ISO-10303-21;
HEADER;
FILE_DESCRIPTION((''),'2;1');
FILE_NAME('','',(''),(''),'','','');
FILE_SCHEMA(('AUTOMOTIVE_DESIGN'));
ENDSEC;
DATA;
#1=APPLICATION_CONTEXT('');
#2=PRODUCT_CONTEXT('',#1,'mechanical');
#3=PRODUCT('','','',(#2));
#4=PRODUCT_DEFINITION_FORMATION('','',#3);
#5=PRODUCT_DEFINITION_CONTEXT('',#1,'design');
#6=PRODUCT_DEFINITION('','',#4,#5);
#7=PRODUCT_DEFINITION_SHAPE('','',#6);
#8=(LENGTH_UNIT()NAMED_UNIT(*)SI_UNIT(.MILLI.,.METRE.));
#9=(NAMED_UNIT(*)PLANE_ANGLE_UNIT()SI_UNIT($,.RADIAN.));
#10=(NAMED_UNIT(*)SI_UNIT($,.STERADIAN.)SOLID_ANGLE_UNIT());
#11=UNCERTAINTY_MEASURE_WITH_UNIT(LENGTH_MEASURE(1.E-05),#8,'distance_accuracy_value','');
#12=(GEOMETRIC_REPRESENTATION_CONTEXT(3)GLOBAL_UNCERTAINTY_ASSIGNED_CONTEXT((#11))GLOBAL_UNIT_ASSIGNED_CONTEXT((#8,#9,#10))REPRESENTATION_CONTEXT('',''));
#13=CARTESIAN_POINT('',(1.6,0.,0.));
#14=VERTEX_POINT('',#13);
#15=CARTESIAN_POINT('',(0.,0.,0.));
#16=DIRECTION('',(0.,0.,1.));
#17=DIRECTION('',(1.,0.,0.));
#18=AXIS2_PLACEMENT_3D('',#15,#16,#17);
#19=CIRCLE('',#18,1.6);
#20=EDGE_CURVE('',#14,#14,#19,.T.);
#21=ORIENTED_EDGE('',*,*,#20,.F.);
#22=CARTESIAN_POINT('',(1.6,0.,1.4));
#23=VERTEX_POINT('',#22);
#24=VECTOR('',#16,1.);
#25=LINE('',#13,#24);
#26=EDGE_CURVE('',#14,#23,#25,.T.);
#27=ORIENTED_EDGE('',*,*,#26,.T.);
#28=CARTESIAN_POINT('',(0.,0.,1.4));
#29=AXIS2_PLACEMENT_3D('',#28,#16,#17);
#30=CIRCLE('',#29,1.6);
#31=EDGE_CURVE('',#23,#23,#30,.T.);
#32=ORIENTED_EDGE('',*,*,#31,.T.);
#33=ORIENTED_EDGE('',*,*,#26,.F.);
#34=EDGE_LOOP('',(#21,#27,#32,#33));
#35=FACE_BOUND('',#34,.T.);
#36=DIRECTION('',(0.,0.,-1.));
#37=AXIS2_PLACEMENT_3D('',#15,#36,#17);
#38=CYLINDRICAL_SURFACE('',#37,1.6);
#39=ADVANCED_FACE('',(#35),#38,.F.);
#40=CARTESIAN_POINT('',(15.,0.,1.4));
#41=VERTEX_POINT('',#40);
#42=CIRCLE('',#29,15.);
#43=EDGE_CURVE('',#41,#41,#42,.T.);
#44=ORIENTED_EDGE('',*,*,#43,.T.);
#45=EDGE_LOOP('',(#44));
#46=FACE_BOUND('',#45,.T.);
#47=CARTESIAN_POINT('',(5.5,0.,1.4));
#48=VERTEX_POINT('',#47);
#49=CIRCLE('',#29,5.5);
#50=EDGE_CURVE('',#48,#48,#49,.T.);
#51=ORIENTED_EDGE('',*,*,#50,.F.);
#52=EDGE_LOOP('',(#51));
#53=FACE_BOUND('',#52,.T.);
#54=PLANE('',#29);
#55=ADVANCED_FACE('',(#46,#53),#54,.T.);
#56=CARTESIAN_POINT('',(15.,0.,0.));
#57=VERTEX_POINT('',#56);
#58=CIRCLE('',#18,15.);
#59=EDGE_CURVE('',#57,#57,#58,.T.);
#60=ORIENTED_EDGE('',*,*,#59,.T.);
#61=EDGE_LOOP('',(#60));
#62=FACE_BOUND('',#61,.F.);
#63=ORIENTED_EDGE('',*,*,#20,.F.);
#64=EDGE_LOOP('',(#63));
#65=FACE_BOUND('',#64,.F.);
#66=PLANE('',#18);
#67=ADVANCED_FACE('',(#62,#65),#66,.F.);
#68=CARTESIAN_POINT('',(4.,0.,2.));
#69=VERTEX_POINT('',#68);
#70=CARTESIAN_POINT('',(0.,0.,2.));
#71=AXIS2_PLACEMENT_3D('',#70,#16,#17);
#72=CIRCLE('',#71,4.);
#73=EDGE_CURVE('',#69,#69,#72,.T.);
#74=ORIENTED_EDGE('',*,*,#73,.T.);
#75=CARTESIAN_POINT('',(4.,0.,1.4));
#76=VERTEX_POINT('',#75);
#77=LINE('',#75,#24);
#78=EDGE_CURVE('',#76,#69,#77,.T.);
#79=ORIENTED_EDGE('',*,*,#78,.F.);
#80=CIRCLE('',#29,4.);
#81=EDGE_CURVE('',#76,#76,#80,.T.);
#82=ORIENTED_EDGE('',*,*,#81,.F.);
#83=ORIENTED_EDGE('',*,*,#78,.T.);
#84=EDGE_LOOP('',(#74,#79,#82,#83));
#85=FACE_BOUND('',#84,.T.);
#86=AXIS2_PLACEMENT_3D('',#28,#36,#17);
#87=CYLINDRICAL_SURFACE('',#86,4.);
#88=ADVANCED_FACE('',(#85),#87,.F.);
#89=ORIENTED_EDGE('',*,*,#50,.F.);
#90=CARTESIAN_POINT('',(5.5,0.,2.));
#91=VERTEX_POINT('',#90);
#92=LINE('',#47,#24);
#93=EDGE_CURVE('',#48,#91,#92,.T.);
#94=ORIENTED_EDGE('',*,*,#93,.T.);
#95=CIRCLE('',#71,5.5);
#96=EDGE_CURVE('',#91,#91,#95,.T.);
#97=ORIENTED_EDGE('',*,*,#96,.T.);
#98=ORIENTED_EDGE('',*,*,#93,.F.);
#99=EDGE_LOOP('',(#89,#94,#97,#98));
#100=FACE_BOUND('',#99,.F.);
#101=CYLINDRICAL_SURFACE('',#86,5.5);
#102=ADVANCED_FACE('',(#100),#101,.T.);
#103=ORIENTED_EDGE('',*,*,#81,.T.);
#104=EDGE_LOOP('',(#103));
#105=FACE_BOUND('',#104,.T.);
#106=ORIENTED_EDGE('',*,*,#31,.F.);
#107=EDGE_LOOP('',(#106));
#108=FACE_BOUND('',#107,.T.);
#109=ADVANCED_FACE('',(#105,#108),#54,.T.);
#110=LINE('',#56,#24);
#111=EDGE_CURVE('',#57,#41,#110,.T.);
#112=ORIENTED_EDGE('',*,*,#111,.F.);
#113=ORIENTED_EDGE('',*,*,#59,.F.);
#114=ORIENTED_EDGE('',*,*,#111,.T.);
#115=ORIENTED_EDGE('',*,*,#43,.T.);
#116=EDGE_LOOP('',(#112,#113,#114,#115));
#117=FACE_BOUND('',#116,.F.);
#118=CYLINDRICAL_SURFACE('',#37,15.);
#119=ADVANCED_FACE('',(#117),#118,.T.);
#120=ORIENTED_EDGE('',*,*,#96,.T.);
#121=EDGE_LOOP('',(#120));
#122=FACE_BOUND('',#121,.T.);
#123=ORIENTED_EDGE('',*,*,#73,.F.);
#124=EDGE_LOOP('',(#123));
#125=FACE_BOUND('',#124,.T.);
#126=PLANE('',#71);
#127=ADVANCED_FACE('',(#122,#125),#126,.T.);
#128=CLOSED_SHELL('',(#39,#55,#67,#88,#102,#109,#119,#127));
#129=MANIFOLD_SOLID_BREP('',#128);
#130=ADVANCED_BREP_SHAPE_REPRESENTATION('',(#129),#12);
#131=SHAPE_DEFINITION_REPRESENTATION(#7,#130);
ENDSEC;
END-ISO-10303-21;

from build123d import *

# Parameters (mm, degrees)
F0_R     = 15
F0_R_2   = 1.6
F1_DEPTH = 1.4
F2_R     = 5.5
F2_R_2   = 4
F3_DEPTH = 0.6


# Not quite as in the source:
# - a feature names something its author has since deleted; it is built from what else it names


with BuildPart() as f1:
    # F0 (on Top) → F1 (new body)
    with BuildSketch(Plane.XY):
        Circle(F0_R)
        Circle(F0_R_2, mode=Mode.SUBTRACT)
    extrude(amount=F1_DEPTH)

    # F2 (on face) → F3 (join)
    with BuildSketch(Plane.XY.offset(1.4)):
        Circle(F2_R)
        Circle(F2_R_2, mode=Mode.SUBTRACT)
    extrude(amount=F3_DEPTH)


solid = f1.part
